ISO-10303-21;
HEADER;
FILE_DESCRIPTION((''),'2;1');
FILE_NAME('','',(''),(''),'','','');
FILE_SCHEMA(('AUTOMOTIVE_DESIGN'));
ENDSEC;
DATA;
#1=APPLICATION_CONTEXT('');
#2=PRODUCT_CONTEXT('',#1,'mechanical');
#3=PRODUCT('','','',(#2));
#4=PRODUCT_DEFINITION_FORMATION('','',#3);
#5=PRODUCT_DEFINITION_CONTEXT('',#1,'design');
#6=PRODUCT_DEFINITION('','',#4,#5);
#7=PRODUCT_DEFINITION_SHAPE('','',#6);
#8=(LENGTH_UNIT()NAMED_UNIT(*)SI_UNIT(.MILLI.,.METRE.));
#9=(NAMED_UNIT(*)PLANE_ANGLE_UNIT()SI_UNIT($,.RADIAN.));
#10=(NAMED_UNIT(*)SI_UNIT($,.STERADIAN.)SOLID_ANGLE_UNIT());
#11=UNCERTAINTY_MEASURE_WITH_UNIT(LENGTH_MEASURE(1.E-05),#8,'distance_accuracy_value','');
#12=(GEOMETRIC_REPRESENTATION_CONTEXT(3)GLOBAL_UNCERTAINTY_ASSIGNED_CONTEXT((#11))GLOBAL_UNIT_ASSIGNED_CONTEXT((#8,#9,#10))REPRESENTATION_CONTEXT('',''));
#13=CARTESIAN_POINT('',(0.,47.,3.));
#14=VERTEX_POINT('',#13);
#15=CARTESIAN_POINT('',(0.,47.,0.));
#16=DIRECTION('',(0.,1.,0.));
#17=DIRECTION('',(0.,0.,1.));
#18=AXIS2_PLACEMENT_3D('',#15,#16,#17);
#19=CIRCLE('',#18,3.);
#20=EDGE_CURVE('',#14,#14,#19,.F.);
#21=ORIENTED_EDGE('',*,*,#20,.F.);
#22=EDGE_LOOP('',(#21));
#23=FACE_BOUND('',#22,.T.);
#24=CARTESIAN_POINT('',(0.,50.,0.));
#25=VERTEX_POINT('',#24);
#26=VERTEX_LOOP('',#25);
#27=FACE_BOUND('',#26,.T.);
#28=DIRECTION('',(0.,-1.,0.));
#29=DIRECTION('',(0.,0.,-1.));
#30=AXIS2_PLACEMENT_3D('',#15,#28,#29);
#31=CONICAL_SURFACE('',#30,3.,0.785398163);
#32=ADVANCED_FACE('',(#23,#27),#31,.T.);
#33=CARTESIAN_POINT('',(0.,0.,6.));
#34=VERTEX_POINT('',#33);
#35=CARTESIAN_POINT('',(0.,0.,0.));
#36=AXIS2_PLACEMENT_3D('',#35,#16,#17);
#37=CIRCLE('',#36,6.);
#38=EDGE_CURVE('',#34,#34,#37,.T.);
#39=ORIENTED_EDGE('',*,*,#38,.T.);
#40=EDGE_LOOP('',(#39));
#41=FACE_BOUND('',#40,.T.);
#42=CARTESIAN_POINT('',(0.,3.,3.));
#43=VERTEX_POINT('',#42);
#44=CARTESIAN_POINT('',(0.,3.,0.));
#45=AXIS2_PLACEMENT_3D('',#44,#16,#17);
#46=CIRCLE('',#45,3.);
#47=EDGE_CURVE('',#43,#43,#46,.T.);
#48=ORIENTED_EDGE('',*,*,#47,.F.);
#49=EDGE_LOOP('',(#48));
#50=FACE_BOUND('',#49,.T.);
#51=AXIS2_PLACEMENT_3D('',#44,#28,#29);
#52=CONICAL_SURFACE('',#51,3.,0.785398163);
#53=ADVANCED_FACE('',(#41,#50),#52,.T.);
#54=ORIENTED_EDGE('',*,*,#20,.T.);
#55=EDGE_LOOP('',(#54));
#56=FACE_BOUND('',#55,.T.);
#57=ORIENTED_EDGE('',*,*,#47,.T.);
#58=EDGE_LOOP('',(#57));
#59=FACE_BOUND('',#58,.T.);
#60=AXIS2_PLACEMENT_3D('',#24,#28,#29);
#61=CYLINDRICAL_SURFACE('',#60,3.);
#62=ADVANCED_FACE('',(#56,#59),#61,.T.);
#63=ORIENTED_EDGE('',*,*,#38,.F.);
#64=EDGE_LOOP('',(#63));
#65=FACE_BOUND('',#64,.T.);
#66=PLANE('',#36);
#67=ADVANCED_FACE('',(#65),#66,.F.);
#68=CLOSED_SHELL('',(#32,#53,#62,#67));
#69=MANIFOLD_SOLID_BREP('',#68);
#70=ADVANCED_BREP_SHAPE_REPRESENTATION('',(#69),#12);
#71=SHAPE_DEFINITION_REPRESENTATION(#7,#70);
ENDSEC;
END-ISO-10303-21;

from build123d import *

# Parameters (mm, degrees)
SKETCH1_R           = 6
SKETCH1_R_2         = 3
BOSS_EXTRUDE1_DEPTH = 3
SKETCH1_2_R         = 3
BOSS_EXTRUDE2_DEPTH = 50
CHAMFER1_SIZE       = 3


with BuildPart() as part:
    # Sketch1 → Boss-Extrude1 (new body)
    with BuildSketch(Plane(origin=(0, 0, 0), x_dir=(1, 0, 0), z_dir=(0, 1, 0))):
        with Locations(Location((0, 0, 0), (0, 0, 270))):
            Circle(SKETCH1_R)
        with Locations(Location((0, 0, 0), (0, 0, 270))):
            Circle(SKETCH1_R_2, mode=Mode.SUBTRACT)
    extrude(amount=BOSS_EXTRUDE1_DEPTH)

    # Sketch1<2> → Boss-Extrude2 (add)
    with BuildSketch(Plane(origin=(0, 0, 0), x_dir=(1, 0, 0), z_dir=(0, 1, 0))):
        with Locations(Location((0, 0, 0), (0, 0, 270))):
            Circle(SKETCH1_2_R)
    extrude(amount=BOSS_EXTRUDE2_DEPTH)

    # Chamfer1
    chamfer1_edges = [part.edges().sort_by_distance(p)[0] for p in [
        (0, 50, -3),
        (0, 3, -6),
    ]]
    chamfer(chamfer1_edges, length=CHAMFER1_SIZE - 0.0001)  # a hair under: the kernel refuses the full size


solid = part.part
